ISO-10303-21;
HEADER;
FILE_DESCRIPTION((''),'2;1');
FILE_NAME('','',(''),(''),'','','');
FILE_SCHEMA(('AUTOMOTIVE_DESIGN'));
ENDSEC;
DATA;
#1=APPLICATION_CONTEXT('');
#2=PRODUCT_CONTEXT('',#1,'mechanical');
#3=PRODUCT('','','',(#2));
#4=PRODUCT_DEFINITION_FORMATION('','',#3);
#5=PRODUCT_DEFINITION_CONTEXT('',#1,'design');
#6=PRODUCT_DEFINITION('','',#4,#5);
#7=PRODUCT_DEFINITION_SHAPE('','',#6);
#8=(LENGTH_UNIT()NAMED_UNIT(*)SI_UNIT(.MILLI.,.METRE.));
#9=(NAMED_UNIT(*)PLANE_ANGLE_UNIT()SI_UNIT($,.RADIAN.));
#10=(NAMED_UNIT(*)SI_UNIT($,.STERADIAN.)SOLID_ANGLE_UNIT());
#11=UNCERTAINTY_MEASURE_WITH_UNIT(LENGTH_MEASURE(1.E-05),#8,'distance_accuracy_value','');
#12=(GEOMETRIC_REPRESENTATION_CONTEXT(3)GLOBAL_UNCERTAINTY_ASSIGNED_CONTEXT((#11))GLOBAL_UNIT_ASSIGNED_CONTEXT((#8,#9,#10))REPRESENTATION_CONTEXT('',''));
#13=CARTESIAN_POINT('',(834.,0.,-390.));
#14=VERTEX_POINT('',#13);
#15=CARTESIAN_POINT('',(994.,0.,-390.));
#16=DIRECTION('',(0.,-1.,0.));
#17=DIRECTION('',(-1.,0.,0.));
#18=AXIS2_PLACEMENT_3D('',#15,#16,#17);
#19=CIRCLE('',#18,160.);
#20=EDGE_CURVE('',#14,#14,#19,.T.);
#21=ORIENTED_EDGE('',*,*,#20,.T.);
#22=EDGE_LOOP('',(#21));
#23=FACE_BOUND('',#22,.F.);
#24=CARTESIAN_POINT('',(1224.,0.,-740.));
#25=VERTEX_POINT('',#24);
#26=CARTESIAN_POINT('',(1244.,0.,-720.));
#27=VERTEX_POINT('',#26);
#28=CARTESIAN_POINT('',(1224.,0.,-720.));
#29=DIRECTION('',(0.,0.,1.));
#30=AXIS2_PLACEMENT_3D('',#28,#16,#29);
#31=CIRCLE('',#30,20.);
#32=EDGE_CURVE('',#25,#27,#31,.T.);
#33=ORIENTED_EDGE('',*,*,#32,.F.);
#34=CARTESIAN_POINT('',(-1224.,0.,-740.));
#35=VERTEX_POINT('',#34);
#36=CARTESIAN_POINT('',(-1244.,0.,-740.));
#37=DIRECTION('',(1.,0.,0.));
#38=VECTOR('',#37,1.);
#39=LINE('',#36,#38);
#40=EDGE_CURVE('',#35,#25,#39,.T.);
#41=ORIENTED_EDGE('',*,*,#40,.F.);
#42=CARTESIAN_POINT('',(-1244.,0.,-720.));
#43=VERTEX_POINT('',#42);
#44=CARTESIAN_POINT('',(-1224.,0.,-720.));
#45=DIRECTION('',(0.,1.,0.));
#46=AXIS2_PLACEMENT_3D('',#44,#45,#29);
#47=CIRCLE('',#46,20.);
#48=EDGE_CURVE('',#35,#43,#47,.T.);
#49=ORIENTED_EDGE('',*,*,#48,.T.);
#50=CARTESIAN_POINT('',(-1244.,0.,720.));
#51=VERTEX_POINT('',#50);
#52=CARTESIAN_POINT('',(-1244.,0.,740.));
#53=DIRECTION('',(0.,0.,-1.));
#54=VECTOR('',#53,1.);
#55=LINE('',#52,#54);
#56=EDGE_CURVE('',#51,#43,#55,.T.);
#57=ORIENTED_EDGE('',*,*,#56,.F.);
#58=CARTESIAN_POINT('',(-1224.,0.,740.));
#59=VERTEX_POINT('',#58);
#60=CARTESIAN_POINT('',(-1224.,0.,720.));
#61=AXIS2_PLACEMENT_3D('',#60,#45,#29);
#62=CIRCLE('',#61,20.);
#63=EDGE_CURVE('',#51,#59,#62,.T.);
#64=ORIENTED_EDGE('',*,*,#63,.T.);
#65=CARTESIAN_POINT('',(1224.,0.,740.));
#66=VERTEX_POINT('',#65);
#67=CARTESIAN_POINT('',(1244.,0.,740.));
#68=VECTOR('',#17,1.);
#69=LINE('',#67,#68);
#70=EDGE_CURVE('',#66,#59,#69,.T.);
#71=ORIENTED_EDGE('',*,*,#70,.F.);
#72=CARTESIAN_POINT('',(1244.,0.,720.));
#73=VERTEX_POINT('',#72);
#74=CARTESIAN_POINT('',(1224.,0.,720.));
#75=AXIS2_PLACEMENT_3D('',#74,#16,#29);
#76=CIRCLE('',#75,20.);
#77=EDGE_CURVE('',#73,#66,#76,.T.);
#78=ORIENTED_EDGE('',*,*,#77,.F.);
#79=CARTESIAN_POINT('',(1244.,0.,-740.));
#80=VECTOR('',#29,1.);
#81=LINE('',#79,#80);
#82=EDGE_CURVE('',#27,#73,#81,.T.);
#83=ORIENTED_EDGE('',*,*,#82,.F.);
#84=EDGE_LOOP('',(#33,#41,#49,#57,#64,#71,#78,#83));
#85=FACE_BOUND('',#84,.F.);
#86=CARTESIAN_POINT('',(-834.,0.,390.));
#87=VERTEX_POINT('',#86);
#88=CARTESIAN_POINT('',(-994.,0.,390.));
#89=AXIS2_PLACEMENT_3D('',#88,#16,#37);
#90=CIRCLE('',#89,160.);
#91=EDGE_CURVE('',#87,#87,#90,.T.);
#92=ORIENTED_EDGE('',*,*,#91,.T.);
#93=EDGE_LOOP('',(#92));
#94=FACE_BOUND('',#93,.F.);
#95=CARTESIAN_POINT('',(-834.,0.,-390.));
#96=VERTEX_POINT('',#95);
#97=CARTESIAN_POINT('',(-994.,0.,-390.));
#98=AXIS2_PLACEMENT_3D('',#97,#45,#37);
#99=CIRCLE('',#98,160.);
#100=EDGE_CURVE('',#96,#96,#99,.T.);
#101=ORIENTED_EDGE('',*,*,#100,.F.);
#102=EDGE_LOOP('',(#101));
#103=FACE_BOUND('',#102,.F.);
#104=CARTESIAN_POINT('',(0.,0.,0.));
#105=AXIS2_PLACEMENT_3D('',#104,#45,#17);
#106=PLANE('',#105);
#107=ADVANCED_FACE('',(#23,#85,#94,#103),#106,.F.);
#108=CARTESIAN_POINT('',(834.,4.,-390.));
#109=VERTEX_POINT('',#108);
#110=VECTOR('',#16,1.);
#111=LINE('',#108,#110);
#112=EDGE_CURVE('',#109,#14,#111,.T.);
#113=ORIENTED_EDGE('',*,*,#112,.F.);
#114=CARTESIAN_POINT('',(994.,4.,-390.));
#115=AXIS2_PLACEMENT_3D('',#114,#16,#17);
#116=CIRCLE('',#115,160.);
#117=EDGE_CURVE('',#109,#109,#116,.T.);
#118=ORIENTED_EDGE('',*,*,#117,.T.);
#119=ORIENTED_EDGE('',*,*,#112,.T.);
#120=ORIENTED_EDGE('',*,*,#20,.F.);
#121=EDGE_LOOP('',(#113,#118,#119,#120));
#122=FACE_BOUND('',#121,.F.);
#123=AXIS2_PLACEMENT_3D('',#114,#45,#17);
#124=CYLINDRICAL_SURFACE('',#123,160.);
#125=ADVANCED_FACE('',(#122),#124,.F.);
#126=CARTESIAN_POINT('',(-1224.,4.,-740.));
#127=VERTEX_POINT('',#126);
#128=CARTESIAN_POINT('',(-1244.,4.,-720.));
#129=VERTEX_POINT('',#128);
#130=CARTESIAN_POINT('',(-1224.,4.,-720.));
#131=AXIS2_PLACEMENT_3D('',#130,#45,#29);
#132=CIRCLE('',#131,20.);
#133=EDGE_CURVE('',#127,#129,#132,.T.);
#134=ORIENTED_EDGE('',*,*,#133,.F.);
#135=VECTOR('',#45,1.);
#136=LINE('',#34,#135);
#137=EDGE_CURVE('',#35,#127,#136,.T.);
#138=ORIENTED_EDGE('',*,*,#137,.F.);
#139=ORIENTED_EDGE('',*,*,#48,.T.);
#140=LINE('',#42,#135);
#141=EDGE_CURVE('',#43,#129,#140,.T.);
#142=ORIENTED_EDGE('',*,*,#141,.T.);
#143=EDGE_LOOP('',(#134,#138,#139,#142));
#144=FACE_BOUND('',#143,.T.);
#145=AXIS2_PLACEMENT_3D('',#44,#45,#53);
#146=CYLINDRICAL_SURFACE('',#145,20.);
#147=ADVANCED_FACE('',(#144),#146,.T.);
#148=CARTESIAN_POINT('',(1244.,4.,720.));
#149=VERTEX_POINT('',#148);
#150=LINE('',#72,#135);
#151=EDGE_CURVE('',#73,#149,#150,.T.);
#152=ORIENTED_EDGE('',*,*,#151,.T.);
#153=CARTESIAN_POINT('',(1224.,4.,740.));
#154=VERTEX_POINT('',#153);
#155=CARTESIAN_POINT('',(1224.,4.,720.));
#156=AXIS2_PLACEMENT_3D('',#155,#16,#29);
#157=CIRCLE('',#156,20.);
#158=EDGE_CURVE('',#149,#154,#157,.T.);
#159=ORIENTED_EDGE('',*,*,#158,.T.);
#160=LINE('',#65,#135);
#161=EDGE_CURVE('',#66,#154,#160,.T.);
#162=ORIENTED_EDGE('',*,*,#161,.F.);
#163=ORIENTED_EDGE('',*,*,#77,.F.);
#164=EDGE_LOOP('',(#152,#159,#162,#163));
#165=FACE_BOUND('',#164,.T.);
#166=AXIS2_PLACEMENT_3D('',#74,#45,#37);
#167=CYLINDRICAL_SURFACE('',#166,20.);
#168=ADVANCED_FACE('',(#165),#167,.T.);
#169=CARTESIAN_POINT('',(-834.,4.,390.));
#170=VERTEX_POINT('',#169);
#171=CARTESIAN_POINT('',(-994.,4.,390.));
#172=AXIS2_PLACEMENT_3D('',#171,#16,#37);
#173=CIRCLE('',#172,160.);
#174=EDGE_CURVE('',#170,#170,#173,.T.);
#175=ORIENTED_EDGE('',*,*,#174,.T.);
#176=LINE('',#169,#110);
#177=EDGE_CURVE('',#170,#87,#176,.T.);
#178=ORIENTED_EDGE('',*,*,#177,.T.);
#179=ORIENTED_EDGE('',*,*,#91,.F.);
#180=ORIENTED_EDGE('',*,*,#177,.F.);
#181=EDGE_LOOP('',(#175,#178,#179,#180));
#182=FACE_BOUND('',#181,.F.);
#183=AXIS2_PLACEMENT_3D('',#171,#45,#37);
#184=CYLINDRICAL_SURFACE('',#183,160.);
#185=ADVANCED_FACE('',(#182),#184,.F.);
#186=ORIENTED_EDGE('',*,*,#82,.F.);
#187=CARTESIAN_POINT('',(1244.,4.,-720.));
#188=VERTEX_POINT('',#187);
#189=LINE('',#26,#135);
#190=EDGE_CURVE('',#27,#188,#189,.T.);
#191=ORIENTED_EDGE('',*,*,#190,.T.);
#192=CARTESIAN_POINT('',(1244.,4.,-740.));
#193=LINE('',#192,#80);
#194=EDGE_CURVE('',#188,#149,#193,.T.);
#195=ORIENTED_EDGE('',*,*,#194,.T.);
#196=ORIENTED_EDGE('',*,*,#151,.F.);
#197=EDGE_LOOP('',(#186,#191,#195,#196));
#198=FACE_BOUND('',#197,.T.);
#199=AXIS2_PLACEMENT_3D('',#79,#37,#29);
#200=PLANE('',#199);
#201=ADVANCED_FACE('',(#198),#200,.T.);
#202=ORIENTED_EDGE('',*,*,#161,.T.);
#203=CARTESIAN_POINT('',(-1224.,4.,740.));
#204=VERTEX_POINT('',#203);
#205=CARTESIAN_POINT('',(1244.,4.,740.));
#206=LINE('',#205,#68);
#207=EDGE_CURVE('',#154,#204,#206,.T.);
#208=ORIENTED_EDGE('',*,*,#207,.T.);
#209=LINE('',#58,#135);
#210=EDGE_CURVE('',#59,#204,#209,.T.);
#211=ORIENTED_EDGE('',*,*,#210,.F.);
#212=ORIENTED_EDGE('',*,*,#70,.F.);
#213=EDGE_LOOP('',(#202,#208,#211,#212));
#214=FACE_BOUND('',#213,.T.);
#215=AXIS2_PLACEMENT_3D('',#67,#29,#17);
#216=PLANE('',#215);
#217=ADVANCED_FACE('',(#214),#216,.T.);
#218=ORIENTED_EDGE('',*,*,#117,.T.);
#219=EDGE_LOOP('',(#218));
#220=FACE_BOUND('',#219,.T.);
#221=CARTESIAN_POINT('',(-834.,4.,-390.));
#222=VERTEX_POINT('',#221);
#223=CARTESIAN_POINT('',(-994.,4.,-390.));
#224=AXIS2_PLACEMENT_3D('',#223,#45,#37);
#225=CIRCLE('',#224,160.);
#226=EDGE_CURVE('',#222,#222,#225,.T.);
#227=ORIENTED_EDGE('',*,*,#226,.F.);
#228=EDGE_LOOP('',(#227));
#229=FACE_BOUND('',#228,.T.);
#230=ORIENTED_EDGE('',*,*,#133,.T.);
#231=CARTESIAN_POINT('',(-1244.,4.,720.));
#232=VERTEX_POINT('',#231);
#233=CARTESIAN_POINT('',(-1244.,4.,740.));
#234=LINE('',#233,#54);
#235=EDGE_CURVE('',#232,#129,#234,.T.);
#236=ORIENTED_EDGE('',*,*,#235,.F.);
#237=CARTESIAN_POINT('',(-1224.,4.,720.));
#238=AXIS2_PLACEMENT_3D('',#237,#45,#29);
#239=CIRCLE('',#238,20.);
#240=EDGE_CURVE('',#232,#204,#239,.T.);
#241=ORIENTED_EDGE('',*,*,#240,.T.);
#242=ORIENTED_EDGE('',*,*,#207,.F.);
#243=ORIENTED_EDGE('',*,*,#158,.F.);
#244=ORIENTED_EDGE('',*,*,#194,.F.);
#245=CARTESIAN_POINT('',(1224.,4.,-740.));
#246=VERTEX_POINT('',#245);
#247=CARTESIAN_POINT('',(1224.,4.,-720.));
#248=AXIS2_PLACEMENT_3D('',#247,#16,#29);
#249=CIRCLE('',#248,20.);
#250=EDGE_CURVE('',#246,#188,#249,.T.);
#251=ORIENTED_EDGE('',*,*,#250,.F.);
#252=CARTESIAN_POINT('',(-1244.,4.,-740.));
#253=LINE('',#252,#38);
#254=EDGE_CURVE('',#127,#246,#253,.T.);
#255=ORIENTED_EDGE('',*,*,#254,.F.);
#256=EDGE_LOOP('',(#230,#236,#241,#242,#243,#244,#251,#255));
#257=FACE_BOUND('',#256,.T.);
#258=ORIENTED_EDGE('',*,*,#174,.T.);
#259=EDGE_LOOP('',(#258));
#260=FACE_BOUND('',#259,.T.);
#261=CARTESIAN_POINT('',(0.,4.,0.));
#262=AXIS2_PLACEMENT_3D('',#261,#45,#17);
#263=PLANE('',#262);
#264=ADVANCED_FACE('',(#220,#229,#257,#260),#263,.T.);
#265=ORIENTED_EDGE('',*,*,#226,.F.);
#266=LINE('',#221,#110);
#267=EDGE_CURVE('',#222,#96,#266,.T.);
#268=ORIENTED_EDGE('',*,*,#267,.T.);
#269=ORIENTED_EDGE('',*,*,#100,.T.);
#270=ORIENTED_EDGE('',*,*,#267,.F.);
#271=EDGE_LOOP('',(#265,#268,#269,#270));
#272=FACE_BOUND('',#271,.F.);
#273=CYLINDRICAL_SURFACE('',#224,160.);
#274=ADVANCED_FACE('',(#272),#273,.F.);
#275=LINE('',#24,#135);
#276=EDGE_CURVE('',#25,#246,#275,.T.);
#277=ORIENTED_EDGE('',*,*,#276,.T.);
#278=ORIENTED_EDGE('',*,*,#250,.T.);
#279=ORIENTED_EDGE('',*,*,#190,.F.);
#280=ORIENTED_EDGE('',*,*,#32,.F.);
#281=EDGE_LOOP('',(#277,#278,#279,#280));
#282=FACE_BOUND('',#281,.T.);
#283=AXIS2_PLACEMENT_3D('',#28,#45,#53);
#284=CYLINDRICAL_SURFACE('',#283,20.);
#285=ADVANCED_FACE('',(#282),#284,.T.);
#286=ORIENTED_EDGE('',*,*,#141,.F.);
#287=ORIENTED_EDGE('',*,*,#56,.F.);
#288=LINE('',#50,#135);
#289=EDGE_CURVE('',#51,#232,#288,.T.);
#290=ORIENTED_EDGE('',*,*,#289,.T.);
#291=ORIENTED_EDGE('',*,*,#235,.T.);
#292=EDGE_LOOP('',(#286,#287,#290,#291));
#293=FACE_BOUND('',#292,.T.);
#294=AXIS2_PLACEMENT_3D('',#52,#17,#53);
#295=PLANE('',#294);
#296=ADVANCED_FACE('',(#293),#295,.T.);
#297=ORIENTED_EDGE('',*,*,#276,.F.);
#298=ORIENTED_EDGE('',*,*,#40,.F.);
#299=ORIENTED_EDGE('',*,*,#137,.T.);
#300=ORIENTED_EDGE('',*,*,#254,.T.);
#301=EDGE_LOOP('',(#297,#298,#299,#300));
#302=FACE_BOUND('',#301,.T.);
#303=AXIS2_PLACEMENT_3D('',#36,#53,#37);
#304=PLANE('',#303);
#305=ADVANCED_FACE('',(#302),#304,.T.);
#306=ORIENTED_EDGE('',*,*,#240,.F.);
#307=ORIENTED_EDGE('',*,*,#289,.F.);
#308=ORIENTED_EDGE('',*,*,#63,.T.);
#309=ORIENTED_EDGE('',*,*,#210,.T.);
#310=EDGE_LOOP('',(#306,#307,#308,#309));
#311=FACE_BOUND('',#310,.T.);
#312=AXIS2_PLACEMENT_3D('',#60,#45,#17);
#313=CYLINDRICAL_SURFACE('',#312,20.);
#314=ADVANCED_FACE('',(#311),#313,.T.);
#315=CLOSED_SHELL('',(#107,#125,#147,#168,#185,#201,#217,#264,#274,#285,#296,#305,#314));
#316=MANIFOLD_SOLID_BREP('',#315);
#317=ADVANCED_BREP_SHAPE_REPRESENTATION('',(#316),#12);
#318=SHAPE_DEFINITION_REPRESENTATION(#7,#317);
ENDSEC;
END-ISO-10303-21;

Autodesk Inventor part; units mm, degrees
ref_plane "YZ Plane" through (0, 0, 0) normal (1, 0, 0) x (0, 1, 0)
ref_plane "XZ Plane" through (0, 0, 0) normal (0, 1, 0) x (-1, 0, 0)
ref_plane "XY Plane" through (0, 0, 0) normal (0, 0, 1) x (1, 0, 0)
sketch "Sketch1" plane through (0, 0, 0) normal (0, 1, 0) x (-1, 0, 0)
  line L0 (1244, -740) -> (-1244, -740)
  line L1 (-1244, -740) -> (-1244, 740)
  line L2 (-1244, 740) -> (1244, 740)
  line L3 (1244, 740) -> (1244, -740)
  line L4 (1244, -740) -> (-1244, 740) construction
  line L5 (-1244, -740) -> (1244, 740) construction
  point P0 (0, 0)
  dimension "d0" = 2488
  dimension "d1" = 1480
extrude "Plate1" add sketch "Sketch1" along normal blind 4
sketch "Sketch2" plane through (0, 4, 0) normal (0, 1, 0) x (1, 0, 0)
  line L0 (-1244, -740) -> (-1244, 740) construction
  line L1 (1244, -740) -> (-1244, -740) construction
  line L2 (1244, 740) -> (1244, -740) construction
  line L3 (-1244, 740) -> (1244, 740) construction
  circle A0 centre (-994, 390) radius 160
  point P0 (0, 0)
  dimension "d6" = 320
  dimension "d7" = 250
  dimension "d8" = 350
extrude "Cut1" cut sketch "Sketch2" against normal blind 4
mirror "Mirror1" about plane through (0, 0, 0) normal (1, 0, 0) of "Cut1"
mirror "Mirror2" about plane through (0, 0, 0) normal (0, 0, 1) of "Cut1"
fillet "Corner Round1" radius 20 4 edges at (-1244, 2, 740) (-1244, 2, -740) (1244, 2, -740) (1244, 2, 740)
equation "\"d9\" = Thickness"
equation "\"d2\" = Thickness"
equation "\"BendRadius\" = Thickness"
equation "\"BendReliefWidth\" = Thickness"
equation "\"BendReliefDepth\" = 0.5 * Thickness"
equation "\"CornerReliefSize\" = 4 * Thickness"
equation "\"MinimumRemnant\" = 2 * Thickness"
equation "\"TransitionRadius\" = BendRadius"
equation "\"JacobiRadiusSize\" = BendRadius"
equation "\"GapSize\" = Thickness"
equation "\"Thickness\" = 4"
properties part number "GBK-RK-0021 bottom"
